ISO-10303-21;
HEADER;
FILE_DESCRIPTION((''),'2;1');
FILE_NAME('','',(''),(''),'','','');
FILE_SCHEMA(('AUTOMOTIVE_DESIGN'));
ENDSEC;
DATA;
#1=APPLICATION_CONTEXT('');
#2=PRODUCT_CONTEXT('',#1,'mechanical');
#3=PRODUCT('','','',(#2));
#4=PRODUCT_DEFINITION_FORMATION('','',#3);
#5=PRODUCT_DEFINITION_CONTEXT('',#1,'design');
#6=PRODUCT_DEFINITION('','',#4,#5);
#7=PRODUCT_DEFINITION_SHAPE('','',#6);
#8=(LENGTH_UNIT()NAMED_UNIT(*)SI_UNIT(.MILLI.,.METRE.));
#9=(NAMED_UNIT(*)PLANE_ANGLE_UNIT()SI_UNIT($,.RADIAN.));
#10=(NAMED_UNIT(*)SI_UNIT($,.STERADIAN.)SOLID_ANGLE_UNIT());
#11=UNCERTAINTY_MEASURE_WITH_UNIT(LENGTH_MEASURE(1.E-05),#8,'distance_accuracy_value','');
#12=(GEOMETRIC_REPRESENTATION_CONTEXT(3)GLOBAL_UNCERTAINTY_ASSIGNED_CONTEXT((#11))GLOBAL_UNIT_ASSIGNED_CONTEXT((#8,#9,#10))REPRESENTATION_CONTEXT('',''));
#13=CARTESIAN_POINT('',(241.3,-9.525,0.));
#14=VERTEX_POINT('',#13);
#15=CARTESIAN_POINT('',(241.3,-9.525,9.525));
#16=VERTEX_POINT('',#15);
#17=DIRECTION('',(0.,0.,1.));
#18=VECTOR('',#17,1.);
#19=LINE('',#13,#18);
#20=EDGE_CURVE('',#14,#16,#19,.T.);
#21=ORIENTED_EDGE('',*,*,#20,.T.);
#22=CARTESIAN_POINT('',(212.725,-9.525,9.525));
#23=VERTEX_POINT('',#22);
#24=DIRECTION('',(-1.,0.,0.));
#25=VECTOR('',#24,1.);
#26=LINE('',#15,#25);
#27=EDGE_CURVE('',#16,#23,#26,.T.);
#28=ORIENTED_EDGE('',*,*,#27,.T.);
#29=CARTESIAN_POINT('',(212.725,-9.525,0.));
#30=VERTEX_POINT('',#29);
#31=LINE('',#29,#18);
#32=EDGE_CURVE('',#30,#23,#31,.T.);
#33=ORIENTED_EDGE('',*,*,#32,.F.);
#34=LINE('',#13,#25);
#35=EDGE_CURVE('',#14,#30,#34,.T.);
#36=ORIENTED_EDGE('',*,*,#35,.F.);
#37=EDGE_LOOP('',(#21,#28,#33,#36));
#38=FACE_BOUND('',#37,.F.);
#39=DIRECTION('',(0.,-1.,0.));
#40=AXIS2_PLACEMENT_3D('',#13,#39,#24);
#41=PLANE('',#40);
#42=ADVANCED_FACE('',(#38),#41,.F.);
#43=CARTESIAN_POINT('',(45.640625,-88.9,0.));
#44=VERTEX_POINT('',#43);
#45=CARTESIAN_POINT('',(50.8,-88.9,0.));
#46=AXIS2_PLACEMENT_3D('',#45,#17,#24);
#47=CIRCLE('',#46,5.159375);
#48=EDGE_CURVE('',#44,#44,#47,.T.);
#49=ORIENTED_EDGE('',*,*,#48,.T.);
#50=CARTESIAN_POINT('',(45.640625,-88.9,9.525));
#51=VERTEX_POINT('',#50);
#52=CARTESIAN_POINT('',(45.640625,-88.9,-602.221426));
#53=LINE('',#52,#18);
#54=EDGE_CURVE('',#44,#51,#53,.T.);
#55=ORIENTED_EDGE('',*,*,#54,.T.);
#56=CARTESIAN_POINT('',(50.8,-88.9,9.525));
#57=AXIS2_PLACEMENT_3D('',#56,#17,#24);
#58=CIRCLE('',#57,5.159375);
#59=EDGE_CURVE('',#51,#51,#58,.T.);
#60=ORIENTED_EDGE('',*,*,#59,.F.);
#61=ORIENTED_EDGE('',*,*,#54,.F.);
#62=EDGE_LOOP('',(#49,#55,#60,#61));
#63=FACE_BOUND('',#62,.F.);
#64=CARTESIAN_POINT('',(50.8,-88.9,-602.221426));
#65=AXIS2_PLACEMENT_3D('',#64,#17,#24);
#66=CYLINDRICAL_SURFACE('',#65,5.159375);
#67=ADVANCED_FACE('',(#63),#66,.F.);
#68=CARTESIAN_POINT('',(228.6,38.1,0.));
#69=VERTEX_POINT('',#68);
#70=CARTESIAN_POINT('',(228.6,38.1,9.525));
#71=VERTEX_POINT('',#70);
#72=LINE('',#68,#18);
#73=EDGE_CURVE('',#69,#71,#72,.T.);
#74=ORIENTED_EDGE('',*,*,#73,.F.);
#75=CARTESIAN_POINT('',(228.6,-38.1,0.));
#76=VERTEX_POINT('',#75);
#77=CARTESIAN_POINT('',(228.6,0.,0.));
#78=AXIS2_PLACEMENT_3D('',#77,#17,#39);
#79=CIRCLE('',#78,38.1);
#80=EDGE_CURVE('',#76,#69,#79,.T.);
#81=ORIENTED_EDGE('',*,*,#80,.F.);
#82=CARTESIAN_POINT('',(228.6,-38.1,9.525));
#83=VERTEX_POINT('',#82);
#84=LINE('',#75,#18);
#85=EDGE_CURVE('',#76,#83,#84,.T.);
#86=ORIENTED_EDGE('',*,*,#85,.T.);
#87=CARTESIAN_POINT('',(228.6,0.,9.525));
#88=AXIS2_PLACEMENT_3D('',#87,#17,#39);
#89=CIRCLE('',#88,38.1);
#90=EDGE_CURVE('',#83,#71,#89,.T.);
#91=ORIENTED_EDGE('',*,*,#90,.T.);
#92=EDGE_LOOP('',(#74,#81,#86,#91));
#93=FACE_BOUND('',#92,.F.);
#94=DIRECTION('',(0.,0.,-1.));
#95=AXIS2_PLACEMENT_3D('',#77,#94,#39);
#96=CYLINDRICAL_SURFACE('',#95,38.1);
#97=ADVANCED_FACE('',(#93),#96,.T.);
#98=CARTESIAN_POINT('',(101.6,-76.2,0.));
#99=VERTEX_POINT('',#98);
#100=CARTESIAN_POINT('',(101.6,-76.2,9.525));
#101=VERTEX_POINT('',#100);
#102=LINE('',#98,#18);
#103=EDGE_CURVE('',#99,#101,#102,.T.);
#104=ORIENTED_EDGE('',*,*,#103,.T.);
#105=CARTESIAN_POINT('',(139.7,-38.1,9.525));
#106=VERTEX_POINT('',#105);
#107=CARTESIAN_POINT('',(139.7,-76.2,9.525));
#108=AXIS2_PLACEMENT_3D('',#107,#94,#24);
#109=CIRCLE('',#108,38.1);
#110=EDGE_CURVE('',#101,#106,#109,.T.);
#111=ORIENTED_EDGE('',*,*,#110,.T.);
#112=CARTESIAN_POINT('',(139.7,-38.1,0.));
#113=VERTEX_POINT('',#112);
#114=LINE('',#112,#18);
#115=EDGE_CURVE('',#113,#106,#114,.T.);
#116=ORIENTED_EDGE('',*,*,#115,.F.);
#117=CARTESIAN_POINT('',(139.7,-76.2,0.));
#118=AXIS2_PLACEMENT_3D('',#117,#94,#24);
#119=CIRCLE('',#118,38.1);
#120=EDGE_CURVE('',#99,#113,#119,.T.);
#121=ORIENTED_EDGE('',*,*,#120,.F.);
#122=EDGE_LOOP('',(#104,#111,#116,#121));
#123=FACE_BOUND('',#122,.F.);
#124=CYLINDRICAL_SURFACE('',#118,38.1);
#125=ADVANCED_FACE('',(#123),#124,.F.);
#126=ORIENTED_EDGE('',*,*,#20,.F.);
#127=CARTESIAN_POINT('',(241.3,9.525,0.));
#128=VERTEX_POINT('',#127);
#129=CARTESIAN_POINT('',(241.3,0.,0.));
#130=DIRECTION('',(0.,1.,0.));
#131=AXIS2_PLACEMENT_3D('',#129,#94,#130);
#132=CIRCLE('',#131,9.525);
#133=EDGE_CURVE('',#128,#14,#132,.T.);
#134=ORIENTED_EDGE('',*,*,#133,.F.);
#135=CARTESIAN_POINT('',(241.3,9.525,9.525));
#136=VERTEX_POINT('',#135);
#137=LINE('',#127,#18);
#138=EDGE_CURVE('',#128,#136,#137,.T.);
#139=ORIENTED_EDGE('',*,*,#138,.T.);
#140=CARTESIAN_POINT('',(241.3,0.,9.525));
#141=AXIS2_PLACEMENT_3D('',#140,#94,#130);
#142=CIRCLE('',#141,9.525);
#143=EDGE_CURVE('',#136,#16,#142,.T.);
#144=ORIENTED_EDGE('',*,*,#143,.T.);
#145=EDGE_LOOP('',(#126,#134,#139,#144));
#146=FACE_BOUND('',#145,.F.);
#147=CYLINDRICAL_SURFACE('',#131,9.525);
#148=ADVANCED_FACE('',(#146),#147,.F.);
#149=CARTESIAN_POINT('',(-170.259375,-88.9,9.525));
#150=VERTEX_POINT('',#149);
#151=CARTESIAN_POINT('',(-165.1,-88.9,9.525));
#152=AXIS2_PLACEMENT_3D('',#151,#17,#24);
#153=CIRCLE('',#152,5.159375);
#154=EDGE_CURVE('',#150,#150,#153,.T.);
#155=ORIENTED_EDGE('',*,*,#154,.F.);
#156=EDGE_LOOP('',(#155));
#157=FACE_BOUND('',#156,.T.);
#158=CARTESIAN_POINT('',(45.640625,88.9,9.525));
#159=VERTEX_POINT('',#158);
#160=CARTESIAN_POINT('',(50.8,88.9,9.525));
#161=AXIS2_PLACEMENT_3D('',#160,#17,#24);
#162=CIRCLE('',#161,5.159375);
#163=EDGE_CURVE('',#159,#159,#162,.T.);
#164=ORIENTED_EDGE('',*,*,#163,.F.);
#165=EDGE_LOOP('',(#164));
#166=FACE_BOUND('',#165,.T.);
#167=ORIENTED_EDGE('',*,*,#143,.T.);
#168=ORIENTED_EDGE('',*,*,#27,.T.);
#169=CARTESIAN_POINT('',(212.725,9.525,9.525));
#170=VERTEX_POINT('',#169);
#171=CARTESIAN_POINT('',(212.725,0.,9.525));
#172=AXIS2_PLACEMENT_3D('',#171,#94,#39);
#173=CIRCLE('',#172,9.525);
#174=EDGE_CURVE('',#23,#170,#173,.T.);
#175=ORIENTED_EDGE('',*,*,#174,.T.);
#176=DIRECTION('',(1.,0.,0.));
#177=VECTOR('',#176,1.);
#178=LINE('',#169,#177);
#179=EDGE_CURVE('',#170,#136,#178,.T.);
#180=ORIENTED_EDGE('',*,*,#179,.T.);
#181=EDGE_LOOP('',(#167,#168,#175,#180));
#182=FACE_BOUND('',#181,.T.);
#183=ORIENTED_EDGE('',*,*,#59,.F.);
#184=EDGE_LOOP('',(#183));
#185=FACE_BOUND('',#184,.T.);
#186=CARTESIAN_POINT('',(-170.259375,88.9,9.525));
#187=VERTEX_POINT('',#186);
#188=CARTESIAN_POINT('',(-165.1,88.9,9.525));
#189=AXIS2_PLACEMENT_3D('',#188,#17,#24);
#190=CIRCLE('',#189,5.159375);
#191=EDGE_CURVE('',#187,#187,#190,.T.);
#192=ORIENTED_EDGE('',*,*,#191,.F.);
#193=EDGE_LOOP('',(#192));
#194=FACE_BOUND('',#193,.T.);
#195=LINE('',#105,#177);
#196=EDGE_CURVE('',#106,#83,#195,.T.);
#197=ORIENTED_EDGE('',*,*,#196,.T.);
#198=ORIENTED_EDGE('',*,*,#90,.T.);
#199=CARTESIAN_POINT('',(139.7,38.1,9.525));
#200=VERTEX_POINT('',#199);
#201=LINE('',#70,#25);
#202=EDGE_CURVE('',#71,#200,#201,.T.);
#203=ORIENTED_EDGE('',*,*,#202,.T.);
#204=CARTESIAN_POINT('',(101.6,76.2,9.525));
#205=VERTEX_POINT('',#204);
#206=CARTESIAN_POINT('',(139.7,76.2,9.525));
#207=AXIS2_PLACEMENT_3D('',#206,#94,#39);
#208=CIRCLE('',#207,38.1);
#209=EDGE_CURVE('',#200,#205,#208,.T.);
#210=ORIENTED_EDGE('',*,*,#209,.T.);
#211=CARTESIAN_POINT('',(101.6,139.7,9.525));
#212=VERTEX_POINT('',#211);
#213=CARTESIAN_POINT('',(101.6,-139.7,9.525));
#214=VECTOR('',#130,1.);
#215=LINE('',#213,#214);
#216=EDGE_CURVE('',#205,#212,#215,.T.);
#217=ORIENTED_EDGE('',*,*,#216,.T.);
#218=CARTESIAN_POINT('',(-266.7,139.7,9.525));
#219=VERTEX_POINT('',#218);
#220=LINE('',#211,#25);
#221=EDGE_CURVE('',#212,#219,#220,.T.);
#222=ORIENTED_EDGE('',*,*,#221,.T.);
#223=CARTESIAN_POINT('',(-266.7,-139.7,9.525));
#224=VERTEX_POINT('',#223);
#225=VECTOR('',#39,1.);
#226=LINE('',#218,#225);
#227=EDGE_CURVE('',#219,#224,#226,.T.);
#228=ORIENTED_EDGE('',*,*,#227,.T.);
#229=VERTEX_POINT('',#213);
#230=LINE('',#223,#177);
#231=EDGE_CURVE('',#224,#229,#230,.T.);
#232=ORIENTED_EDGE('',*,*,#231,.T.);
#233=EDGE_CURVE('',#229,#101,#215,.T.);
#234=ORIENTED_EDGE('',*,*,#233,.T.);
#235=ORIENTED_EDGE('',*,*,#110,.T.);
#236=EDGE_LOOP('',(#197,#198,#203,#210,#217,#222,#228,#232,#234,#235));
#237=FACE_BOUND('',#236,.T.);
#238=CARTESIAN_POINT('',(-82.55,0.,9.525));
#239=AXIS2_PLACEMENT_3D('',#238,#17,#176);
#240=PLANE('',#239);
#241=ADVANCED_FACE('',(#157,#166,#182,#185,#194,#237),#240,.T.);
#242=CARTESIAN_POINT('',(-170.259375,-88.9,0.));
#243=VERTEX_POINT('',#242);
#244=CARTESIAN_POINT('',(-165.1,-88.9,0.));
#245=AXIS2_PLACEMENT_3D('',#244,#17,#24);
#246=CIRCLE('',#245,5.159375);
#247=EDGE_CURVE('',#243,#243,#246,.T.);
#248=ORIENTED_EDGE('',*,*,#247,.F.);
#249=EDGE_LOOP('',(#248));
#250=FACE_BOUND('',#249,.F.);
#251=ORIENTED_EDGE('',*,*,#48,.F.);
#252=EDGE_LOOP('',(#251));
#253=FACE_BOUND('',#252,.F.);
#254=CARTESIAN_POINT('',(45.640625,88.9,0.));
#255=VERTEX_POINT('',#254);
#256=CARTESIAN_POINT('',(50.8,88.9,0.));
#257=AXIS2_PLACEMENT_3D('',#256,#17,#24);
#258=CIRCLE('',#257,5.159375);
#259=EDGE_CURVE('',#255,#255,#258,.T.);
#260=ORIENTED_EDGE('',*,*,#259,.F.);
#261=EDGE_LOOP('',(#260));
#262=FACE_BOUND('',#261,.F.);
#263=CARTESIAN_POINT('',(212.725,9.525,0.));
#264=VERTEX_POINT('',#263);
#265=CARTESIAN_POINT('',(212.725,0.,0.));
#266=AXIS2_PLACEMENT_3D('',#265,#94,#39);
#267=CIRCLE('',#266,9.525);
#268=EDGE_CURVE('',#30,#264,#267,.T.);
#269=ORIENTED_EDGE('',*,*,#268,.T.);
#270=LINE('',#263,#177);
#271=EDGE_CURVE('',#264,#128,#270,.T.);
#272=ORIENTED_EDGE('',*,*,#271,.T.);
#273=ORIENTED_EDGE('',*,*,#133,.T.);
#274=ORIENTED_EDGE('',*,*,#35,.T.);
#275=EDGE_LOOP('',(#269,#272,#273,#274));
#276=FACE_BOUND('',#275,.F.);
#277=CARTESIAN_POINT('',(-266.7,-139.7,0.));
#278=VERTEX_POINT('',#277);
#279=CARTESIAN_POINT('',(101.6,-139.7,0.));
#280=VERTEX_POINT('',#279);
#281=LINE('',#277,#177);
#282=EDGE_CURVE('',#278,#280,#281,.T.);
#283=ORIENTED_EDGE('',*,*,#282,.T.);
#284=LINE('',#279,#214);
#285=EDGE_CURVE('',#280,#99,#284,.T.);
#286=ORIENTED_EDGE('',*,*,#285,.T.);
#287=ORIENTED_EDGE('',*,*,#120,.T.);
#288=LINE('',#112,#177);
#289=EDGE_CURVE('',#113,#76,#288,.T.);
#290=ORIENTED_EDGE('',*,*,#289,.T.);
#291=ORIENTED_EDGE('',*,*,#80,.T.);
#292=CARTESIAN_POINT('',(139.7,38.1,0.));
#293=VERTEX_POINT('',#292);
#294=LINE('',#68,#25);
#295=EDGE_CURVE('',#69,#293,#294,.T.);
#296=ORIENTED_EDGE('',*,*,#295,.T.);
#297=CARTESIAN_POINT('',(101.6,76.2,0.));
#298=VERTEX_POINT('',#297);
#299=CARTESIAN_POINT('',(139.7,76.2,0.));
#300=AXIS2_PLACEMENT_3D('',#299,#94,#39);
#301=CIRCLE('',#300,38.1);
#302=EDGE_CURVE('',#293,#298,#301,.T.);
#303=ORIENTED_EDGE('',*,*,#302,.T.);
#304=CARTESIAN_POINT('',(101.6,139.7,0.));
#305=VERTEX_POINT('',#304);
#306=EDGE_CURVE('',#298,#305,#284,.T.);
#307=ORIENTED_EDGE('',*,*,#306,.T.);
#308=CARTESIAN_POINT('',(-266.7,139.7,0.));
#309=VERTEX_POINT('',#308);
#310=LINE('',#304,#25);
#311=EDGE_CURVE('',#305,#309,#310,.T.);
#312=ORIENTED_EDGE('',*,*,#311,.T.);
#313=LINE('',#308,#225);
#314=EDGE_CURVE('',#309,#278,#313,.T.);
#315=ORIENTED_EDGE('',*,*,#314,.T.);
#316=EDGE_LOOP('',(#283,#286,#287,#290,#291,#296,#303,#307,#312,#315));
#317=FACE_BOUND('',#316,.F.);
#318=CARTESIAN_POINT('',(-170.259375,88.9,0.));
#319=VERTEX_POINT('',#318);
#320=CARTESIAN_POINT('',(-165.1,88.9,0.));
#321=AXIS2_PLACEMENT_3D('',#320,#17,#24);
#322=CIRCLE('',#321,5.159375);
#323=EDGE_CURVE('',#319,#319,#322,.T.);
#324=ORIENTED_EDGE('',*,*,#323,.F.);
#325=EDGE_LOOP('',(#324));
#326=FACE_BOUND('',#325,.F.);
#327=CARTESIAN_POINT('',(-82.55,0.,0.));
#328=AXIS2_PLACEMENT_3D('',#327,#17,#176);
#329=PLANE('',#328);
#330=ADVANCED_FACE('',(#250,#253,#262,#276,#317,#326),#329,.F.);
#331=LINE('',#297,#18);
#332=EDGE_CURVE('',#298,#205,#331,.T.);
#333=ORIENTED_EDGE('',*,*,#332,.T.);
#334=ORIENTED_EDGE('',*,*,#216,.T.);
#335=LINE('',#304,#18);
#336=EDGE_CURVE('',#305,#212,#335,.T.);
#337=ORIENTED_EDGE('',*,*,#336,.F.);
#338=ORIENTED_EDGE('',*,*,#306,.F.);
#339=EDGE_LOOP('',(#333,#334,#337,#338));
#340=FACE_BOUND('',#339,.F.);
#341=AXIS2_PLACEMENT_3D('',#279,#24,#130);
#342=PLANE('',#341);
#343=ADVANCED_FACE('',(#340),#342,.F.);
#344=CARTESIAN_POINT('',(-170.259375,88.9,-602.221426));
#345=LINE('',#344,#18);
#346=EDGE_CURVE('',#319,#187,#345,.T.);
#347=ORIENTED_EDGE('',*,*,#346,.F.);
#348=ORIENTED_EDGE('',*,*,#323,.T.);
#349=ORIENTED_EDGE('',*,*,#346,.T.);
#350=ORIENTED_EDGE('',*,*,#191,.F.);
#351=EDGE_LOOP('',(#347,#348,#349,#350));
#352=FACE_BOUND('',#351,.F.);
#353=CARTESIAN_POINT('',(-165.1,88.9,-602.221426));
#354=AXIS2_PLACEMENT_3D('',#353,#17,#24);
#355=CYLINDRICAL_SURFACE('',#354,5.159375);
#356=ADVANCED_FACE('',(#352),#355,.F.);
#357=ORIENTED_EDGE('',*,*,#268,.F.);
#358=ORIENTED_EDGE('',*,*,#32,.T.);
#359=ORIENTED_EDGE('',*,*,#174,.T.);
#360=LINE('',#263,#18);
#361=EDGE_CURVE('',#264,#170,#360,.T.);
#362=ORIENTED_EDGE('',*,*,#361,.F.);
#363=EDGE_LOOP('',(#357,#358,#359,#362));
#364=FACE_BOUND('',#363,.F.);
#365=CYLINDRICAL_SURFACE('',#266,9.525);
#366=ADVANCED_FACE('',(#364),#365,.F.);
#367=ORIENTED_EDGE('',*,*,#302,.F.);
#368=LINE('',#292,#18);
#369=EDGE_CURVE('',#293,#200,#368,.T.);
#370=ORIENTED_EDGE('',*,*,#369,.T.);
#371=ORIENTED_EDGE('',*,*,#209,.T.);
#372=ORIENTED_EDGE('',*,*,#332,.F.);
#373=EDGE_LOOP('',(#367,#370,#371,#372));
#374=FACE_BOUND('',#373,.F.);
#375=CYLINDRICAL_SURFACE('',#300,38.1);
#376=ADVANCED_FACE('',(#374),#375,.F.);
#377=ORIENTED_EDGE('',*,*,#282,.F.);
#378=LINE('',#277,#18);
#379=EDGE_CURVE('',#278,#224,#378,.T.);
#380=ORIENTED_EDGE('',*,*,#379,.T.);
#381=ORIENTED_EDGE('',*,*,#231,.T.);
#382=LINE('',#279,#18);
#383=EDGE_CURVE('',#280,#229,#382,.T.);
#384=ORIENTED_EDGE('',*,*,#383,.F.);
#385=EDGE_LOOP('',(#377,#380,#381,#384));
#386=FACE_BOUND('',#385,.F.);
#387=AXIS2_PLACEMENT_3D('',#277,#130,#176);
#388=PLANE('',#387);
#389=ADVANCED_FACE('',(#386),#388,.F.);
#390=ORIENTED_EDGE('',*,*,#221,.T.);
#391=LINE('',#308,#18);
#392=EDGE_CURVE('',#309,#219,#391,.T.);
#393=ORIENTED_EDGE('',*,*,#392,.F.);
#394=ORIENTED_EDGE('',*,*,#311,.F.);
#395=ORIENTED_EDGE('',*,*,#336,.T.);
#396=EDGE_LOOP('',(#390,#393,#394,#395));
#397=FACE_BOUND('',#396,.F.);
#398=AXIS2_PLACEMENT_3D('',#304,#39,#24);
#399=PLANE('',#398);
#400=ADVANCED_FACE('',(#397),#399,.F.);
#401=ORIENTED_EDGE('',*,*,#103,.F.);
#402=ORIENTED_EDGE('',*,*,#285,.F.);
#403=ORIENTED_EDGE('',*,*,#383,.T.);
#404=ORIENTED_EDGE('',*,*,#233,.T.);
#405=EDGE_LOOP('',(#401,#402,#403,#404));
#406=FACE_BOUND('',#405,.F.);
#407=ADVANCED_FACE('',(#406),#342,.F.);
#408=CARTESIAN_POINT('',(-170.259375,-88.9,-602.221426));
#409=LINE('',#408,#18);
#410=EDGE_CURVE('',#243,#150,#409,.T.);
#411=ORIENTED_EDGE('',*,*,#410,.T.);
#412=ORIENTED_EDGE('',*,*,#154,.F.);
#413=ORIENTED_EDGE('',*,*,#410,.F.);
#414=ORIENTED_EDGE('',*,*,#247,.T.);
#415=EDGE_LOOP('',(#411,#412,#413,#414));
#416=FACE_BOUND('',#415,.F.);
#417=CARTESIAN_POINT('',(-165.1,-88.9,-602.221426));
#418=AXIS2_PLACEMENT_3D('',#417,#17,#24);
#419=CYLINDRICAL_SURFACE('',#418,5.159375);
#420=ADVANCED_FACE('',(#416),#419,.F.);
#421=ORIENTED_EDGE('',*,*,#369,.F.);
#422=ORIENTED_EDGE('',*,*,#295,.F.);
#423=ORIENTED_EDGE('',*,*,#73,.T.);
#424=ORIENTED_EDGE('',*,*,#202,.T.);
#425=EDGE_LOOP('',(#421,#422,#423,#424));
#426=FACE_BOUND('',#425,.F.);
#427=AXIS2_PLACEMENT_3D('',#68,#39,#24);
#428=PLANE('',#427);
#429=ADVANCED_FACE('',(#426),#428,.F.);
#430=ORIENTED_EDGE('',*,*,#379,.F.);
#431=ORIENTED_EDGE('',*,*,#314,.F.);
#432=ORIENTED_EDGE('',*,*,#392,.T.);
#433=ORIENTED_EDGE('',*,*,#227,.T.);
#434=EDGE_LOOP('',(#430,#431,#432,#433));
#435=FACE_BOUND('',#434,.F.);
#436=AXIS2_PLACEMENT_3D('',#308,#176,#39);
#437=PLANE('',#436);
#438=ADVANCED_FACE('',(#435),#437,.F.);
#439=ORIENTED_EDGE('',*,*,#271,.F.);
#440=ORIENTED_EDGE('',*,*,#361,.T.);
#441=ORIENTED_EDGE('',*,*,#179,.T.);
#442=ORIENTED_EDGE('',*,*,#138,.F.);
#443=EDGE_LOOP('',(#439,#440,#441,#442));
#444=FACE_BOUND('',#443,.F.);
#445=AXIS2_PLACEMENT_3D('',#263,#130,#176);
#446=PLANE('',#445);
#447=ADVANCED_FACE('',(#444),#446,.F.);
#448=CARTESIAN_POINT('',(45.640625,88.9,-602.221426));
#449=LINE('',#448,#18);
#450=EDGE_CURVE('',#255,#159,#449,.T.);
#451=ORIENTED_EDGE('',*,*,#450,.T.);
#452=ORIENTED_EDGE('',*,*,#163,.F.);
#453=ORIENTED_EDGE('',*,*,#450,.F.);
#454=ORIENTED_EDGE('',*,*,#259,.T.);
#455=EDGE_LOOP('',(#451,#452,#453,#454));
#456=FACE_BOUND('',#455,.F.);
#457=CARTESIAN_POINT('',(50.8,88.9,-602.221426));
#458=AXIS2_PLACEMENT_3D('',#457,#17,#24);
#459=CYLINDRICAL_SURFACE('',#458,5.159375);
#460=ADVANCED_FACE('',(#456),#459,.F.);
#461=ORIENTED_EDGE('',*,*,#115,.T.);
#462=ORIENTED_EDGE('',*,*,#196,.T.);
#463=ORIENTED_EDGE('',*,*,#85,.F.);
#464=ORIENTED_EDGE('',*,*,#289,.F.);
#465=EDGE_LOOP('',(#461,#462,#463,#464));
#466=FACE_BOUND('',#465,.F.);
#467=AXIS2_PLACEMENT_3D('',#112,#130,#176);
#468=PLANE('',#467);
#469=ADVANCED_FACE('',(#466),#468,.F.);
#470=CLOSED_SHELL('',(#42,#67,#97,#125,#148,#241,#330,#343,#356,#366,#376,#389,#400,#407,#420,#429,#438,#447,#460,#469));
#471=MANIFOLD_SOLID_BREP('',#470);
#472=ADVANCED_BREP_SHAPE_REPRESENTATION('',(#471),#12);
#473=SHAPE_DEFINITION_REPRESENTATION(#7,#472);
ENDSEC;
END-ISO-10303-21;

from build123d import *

# Parameters (mm, degrees)
F1_DEPTH = 9.525
F2_DEPTH = 9.525
F4_D     = 10.31875


# Not quite as in the source:
# - a feature of the source that left no trace in its solid (it failed there, or was rolled back) is left out


with BuildPart() as f1:
    # F0 (on Top) → F1 (new body)
    with BuildSketch(Plane.XY):
        Polygon((-266.7, -139.7), (101.6, -139.7), (101.6, -76.2), (101.6, 76.2), (101.6, 139.7), (-266.7, 139.7), align=None)
    extrude(amount=F1_DEPTH)

    # F0 (on Top) → F2 (join)
    with BuildSketch(Plane.XY):
        with BuildLine():
            Line((101.6, 76.2), (101.6, -76.2))
            ThreePointArc((101.6, -76.2), (112.7592316368, -49.2592316368), (139.7, -38.1))
            Line((139.7, -38.1), (228.6, -38.1))
            ThreePointArc((228.6, -38.1), (266.7, 0), (228.6, 38.1))
            Line((228.6, 38.1), (139.7, 38.1))
            ThreePointArc((139.7, 38.1), (112.7592316368, 49.2592316368), (101.6, 76.2))
        make_face()
        with BuildLine():
            Line((212.725, 9.525), (241.3, 9.525))
            ThreePointArc((241.3, 9.525), (250.825, 0), (241.3, -9.525))
            Line((241.3, -9.525), (212.725, -9.525))
            ThreePointArc((212.725, -9.525), (203.2, 0), (212.725, 9.525))
        make_face(mode=Mode.SUBTRACT)
    extrude(amount=F2_DEPTH)

    # F4 (through all)
    with Locations(Plane(origin=(0, 0, 0), x_dir=(1, 0, 0), z_dir=(0, 0, -1))):
        with Locations((-165.1, -88.9), (-165.1, 88.9), (50.8, 88.9), (50.8, -88.9)):
            Hole(F4_D / 2)


solid = f1.part
